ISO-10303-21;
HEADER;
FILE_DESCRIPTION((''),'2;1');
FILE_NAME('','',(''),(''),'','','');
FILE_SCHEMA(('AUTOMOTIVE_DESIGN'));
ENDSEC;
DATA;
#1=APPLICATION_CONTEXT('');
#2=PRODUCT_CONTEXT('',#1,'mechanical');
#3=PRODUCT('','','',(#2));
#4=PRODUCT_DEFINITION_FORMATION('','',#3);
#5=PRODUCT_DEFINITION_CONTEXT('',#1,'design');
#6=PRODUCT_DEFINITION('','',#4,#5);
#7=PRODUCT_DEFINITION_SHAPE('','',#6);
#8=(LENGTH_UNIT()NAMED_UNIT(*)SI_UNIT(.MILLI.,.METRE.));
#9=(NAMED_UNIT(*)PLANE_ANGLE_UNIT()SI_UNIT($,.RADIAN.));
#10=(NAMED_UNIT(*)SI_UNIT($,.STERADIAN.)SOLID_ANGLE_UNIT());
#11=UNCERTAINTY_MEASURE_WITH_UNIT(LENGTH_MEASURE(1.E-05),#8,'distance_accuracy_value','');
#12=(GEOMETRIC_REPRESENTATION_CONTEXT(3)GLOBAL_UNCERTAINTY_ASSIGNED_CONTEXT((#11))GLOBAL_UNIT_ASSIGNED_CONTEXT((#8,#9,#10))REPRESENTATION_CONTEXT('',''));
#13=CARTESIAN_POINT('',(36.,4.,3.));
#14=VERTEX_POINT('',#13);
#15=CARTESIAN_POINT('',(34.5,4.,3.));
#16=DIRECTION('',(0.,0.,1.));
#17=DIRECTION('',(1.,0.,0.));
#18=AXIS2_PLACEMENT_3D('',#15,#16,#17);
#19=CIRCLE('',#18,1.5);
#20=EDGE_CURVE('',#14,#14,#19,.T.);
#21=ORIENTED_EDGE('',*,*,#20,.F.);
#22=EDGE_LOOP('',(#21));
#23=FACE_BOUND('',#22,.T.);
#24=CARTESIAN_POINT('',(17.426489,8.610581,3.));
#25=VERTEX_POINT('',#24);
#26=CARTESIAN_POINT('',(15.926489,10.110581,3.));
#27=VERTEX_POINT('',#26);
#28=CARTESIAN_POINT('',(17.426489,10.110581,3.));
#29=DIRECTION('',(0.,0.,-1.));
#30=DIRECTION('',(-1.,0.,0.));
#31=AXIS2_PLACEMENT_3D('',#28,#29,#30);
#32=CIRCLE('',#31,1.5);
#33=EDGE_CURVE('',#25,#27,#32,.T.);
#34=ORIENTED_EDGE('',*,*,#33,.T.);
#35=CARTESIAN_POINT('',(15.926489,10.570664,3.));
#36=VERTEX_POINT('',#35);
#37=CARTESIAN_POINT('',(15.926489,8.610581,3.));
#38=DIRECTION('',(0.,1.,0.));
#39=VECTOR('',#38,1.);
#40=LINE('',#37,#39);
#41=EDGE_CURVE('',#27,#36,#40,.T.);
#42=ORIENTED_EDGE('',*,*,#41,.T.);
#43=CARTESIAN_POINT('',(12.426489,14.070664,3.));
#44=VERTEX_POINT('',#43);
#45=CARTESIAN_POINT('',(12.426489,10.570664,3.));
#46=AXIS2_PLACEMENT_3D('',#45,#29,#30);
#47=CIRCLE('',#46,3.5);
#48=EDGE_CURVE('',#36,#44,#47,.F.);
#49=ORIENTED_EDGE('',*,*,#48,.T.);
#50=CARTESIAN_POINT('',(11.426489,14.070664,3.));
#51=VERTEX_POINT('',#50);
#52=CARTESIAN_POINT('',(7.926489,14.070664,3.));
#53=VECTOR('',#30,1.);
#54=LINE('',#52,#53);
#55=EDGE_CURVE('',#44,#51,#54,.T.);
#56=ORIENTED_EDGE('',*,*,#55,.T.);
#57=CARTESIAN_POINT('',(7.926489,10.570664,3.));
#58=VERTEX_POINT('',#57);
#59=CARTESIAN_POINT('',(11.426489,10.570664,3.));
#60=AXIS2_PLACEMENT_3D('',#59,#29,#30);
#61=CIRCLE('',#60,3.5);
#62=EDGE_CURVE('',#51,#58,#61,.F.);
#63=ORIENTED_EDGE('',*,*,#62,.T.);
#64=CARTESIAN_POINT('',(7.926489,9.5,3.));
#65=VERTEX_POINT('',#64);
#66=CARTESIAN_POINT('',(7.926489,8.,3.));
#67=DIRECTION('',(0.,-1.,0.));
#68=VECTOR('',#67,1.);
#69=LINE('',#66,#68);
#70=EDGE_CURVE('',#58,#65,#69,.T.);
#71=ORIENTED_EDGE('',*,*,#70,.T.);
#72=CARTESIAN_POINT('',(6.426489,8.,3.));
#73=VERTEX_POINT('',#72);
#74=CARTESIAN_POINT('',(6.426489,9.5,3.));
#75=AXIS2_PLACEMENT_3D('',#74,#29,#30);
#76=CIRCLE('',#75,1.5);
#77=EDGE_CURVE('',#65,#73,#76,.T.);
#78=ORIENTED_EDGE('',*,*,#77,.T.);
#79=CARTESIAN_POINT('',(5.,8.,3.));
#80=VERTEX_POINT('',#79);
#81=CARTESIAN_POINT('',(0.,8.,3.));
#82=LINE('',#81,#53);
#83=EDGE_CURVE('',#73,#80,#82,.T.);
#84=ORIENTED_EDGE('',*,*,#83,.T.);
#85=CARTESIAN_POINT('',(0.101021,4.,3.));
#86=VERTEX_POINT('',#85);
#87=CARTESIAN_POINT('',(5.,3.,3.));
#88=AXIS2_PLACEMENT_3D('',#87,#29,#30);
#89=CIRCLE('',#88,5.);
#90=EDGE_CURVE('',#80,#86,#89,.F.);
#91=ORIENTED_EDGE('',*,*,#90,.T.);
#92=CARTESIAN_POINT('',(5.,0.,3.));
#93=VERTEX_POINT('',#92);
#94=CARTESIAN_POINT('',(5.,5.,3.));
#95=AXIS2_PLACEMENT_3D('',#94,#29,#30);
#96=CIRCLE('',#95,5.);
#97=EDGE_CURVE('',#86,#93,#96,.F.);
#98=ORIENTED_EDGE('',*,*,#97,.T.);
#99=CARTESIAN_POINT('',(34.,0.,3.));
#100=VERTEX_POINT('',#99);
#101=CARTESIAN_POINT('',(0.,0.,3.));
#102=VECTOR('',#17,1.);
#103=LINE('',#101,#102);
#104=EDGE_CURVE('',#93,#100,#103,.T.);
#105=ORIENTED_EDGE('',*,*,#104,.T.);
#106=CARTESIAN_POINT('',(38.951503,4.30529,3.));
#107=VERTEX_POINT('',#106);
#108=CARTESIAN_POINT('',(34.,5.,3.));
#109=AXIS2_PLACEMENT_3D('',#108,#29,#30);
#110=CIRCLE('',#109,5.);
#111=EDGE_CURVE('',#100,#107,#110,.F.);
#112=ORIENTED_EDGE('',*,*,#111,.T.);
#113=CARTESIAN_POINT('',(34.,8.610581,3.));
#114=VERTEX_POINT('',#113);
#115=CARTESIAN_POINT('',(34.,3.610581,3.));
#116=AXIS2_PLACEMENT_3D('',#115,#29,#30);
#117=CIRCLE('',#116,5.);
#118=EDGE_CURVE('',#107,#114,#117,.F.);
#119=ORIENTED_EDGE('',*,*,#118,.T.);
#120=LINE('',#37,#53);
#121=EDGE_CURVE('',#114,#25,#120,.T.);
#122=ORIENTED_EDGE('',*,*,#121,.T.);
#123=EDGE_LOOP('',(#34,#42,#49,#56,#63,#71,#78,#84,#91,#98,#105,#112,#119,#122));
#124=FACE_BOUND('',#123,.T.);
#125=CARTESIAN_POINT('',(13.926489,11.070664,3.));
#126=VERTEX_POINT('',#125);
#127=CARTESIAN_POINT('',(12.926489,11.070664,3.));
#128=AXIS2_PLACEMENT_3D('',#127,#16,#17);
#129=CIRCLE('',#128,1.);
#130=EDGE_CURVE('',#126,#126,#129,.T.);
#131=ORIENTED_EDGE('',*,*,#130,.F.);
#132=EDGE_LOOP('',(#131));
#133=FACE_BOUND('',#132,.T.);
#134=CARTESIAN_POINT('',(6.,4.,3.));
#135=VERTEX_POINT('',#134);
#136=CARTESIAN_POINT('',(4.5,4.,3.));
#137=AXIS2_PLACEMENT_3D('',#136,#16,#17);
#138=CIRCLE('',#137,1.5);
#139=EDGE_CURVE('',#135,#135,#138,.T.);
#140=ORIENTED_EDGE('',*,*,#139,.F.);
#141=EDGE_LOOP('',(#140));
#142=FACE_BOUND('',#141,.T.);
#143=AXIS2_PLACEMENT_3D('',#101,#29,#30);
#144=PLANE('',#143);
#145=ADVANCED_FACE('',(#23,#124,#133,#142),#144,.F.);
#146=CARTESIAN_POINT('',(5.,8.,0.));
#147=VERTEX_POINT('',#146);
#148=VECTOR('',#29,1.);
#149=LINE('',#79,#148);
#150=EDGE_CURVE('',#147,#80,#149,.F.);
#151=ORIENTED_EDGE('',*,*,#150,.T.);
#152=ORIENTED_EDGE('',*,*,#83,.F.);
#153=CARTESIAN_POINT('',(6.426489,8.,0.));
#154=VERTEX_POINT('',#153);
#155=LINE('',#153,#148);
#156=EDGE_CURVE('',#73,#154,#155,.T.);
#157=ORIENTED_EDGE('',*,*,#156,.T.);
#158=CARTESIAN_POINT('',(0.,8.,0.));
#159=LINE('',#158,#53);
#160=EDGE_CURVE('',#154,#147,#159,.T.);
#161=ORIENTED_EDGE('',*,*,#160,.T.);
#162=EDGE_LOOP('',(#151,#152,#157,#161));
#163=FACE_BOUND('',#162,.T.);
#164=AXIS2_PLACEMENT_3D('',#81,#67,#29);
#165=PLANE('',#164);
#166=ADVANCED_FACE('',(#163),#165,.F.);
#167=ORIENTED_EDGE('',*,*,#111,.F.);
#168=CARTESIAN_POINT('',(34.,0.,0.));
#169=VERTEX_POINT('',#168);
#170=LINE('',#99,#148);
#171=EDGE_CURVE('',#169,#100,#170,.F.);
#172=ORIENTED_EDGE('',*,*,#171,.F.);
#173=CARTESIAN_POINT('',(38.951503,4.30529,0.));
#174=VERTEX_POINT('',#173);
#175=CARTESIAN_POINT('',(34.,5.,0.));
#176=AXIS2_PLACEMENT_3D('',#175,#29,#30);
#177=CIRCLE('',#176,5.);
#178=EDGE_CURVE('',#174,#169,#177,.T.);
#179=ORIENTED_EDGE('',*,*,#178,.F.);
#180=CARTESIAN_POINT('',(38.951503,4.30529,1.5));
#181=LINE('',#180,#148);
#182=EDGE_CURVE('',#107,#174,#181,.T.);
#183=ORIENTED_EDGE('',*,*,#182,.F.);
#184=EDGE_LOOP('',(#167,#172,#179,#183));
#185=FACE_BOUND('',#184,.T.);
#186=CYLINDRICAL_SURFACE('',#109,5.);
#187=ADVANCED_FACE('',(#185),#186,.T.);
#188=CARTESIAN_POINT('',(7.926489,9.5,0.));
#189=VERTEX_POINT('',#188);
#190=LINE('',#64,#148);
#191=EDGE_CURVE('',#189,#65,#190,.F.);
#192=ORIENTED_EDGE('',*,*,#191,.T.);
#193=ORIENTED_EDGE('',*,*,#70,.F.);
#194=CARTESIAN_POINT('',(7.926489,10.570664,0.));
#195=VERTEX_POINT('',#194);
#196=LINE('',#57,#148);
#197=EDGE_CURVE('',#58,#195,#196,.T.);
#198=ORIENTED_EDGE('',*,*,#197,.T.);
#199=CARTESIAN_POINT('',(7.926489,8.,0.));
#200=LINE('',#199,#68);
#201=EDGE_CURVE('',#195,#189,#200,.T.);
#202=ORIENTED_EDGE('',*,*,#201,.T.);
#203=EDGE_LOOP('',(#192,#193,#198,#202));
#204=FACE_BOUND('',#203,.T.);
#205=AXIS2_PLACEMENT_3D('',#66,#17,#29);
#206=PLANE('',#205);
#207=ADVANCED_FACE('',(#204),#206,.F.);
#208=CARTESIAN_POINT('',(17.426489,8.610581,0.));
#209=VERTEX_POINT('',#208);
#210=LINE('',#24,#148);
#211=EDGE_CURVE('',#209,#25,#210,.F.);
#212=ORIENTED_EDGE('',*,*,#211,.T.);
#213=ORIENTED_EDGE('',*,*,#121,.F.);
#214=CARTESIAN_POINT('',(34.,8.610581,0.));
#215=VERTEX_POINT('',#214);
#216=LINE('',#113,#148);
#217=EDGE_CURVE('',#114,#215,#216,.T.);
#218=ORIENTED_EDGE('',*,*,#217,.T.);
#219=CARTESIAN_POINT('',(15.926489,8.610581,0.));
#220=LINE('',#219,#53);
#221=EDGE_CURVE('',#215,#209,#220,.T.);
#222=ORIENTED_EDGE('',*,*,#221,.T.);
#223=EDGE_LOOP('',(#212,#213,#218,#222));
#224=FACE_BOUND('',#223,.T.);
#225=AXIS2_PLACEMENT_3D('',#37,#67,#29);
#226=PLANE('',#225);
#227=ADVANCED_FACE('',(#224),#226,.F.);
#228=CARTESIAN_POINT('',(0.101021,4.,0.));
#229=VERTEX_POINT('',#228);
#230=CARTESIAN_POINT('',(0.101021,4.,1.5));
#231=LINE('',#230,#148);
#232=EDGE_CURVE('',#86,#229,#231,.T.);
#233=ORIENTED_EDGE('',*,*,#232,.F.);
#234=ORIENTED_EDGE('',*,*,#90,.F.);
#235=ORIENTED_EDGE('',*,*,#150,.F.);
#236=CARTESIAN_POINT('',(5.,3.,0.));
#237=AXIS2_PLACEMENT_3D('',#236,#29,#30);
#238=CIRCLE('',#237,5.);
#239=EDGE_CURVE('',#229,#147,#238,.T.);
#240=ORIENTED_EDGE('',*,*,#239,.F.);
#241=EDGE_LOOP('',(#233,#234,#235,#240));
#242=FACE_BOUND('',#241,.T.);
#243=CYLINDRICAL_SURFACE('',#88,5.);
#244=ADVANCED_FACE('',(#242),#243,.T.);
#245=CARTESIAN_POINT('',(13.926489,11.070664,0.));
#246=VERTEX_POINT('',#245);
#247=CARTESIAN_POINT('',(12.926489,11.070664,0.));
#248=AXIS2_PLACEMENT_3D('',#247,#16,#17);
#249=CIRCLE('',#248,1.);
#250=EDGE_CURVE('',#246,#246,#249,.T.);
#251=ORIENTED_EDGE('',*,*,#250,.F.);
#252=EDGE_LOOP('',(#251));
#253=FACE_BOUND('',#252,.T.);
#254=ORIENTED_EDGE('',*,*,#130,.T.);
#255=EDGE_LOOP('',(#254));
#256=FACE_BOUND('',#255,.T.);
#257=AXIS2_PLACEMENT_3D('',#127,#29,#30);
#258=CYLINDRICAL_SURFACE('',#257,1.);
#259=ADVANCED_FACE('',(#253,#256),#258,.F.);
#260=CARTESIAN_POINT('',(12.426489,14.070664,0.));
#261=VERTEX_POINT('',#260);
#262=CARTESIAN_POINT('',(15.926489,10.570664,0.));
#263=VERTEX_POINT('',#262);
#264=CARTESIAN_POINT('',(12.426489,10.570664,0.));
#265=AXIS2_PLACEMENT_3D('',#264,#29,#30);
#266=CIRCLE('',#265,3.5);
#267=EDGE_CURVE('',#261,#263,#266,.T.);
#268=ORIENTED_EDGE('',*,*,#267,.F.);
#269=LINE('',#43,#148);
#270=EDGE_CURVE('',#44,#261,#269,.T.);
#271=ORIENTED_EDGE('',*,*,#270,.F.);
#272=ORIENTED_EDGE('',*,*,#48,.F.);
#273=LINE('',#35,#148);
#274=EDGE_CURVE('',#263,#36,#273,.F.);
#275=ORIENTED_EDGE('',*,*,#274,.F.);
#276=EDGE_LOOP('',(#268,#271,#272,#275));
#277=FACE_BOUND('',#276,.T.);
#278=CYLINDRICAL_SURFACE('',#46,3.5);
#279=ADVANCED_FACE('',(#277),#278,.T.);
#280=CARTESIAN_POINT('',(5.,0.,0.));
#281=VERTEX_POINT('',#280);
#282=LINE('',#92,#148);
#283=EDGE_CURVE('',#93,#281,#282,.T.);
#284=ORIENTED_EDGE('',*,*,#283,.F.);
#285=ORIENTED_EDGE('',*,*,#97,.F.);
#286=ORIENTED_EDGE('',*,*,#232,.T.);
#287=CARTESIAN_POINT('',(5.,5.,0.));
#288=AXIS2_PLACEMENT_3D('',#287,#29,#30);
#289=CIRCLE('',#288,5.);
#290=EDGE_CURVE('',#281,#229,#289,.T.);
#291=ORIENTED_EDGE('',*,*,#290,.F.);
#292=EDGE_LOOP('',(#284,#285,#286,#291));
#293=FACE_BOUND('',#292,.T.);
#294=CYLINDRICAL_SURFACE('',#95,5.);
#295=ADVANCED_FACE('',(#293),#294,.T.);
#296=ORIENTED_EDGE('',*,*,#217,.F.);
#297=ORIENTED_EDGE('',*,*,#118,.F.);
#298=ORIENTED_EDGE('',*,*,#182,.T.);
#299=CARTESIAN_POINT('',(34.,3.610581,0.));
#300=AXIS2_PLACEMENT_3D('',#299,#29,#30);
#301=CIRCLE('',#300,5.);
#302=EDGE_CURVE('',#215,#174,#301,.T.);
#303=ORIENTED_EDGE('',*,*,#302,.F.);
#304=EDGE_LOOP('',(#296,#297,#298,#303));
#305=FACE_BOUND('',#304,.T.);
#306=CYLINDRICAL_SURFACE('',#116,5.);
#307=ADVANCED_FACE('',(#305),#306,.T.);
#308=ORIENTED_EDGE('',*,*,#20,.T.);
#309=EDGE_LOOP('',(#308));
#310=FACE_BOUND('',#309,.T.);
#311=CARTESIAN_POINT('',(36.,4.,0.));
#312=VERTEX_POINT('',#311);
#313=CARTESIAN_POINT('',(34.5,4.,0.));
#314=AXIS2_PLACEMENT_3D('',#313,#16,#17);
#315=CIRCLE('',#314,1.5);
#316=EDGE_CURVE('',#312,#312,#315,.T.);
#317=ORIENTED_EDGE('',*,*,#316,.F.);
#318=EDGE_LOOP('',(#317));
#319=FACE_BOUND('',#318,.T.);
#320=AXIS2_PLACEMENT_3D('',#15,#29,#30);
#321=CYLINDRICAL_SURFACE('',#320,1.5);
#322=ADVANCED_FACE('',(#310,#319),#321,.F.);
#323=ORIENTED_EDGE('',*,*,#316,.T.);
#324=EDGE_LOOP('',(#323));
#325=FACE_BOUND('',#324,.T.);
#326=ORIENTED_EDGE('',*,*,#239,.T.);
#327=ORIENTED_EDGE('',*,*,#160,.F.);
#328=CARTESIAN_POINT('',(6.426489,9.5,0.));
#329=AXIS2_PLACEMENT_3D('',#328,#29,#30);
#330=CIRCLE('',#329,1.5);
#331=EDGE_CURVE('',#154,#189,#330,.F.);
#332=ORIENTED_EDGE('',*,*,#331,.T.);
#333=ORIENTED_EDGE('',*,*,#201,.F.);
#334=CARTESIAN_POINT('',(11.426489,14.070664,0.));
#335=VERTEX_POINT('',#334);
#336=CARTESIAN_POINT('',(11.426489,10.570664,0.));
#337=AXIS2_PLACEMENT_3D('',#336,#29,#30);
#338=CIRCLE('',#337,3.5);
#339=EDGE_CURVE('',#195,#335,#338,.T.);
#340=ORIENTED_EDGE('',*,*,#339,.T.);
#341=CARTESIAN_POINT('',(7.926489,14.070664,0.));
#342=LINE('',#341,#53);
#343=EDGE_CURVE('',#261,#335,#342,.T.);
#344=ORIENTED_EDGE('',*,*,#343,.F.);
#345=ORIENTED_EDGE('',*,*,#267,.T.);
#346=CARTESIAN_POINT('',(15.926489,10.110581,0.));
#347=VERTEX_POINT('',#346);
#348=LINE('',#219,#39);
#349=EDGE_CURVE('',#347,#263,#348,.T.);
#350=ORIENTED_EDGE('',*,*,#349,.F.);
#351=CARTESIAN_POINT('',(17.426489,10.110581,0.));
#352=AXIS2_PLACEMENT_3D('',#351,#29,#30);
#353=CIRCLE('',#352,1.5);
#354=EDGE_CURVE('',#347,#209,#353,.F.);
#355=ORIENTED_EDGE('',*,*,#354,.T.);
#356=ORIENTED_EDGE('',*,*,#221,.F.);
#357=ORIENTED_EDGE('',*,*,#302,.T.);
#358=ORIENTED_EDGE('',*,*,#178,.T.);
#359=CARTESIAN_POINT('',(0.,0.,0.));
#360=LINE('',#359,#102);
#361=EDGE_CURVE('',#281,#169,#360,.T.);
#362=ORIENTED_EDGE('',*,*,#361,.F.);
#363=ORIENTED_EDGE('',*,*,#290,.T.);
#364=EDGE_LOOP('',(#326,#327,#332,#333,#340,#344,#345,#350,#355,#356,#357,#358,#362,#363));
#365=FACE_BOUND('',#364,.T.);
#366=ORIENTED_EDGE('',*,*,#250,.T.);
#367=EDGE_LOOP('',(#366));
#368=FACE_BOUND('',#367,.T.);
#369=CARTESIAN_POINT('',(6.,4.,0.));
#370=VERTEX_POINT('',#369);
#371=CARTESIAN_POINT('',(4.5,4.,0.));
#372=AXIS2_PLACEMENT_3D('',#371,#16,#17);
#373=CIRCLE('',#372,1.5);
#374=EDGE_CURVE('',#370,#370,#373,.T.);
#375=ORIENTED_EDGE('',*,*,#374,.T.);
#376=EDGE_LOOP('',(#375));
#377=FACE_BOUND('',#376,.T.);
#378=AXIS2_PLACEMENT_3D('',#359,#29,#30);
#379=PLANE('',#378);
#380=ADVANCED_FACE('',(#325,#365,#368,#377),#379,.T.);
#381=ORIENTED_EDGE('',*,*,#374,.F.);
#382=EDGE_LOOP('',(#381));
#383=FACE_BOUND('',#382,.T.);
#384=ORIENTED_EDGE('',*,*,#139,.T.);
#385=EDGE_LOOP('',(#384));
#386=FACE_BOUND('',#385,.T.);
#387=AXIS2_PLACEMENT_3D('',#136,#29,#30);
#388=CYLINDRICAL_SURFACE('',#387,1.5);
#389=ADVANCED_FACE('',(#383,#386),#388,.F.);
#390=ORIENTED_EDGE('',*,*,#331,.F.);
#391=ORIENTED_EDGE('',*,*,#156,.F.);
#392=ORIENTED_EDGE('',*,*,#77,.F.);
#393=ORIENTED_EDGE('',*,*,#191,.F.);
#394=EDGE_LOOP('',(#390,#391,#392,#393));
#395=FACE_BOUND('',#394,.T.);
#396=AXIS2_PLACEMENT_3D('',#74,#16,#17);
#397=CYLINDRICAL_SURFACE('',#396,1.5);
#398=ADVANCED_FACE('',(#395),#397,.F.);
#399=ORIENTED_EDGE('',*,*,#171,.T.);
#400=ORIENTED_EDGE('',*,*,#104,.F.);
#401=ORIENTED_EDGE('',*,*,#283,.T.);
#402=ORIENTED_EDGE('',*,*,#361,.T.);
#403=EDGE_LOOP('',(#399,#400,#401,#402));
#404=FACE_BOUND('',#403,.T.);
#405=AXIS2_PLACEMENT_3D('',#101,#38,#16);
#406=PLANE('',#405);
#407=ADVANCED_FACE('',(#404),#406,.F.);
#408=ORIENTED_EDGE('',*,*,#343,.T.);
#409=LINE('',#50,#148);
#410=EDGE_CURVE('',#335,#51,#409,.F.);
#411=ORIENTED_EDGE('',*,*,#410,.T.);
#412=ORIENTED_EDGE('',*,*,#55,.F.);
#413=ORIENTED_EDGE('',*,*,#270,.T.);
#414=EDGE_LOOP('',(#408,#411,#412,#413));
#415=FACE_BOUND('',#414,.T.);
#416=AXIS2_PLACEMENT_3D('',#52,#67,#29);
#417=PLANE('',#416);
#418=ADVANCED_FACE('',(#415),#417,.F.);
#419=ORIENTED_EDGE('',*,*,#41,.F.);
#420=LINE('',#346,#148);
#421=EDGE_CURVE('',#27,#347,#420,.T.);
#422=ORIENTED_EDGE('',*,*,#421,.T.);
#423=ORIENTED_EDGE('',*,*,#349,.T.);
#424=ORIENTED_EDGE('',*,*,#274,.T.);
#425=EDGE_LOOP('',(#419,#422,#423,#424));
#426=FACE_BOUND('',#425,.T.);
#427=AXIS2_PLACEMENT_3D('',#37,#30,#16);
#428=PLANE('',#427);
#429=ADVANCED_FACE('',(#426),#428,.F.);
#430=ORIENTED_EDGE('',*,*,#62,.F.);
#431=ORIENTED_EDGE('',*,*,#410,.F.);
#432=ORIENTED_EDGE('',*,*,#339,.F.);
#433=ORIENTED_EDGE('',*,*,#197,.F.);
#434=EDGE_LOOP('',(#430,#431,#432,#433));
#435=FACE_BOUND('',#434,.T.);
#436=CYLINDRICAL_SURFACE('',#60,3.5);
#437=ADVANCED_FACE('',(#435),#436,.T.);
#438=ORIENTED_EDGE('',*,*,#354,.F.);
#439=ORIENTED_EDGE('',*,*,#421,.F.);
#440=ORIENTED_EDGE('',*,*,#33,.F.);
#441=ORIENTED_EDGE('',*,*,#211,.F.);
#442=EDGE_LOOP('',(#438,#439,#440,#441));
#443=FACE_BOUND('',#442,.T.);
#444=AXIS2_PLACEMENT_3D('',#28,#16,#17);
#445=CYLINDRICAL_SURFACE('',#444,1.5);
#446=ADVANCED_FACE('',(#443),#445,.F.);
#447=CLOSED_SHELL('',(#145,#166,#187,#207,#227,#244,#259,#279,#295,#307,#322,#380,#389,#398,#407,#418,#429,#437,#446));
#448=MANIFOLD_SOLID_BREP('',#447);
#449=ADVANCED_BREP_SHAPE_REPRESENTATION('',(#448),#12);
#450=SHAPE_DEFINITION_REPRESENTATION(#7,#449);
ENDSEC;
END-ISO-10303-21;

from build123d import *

# Parameters (mm, degrees)
SKETCH1_R           = 1.5
SKETCH1_R_2         = 1
BOSS_EXTRUDE1_DEPTH = 3
FILLET1_R           = 5
FILLET2_R           = 3.5
FILLET3_R           = 1.5


with BuildPart() as part:
    # Sketch1 → Boss-Extrude1 (new body)
    with BuildSketch(Plane.XY):
        Polygon((0, 0), (39, 0), (39, 8.610580904), (15.926488874, 8.610580904), (15.926488874, 14.070663707), (7.926488874, 14.070663707), (7.926488874, 8), (0, 8), align=None)
        with Locations((4.5, 4)):
            Circle(SKETCH1_R, mode=Mode.SUBTRACT)
        with Locations((34.5, 4)):
            Circle(SKETCH1_R, mode=Mode.SUBTRACT)
        with Locations((12.926488874, 11.070663707)):
            Circle(SKETCH1_R_2, mode=Mode.SUBTRACT)
    extrude(amount=BOSS_EXTRUDE1_DEPTH)

    # Fillet1
    # the kernel refuses this fillet: 5 mm, written as the material it takes off along each edge
    with BuildSketch(Plane(origin=(39, 8.610580904, -12.5), x_dir=(0, -1, 0), z_dir=(0, 0, 1)), Plane(origin=(39, 0, -12.5), x_dir=(-1, 0, 0), z_dir=(0, 0, 1)), Plane(origin=(0, 8, -12.5), x_dir=(1, 0, 0), z_dir=(0, 0, 1))) as fillet1_piece_1:
        with BuildLine():
            CenterArc((FILLET1_R, -FILLET1_R), FILLET1_R, 90, 90)
            Line((0, -FILLET1_R), (0, 0))
            Line((0, 0), (FILLET1_R, 0))
        make_face()
    extrude(amount=28, mode=Mode.SUBTRACT)
    with BuildSketch(Plane(origin=(0, 0, -12.5), x_dir=(1, 0, 0), z_dir=(0, 0, 1))) as fillet1_piece_2:
        with BuildLine():
            CenterArc((FILLET1_R, FILLET1_R), FILLET1_R, 180, 90)
            Line((0, FILLET1_R), (0, 0))
            Line((0, 0), (FILLET1_R, 0))
        make_face()
    extrude(amount=28, mode=Mode.SUBTRACT)

    # Fillet2
    fillet2_edges = [part.edges().sort_by_distance(p)[0] for p in [
        (7.926488874, 14.070663707, 1.5),
        (15.926488874, 14.070663707, 1.5),
    ]]
    fillet(fillet2_edges, radius=FILLET2_R)

    # Fillet3
    fillet3_edges = [part.edges().sort_by_distance(p)[0] for p in [
        (7.926488874, 8, 1.5),
        (15.926488874, 8.610580904, 1.5),
    ]]
    fillet(fillet3_edges, radius=FILLET3_R)


solid = part.part
